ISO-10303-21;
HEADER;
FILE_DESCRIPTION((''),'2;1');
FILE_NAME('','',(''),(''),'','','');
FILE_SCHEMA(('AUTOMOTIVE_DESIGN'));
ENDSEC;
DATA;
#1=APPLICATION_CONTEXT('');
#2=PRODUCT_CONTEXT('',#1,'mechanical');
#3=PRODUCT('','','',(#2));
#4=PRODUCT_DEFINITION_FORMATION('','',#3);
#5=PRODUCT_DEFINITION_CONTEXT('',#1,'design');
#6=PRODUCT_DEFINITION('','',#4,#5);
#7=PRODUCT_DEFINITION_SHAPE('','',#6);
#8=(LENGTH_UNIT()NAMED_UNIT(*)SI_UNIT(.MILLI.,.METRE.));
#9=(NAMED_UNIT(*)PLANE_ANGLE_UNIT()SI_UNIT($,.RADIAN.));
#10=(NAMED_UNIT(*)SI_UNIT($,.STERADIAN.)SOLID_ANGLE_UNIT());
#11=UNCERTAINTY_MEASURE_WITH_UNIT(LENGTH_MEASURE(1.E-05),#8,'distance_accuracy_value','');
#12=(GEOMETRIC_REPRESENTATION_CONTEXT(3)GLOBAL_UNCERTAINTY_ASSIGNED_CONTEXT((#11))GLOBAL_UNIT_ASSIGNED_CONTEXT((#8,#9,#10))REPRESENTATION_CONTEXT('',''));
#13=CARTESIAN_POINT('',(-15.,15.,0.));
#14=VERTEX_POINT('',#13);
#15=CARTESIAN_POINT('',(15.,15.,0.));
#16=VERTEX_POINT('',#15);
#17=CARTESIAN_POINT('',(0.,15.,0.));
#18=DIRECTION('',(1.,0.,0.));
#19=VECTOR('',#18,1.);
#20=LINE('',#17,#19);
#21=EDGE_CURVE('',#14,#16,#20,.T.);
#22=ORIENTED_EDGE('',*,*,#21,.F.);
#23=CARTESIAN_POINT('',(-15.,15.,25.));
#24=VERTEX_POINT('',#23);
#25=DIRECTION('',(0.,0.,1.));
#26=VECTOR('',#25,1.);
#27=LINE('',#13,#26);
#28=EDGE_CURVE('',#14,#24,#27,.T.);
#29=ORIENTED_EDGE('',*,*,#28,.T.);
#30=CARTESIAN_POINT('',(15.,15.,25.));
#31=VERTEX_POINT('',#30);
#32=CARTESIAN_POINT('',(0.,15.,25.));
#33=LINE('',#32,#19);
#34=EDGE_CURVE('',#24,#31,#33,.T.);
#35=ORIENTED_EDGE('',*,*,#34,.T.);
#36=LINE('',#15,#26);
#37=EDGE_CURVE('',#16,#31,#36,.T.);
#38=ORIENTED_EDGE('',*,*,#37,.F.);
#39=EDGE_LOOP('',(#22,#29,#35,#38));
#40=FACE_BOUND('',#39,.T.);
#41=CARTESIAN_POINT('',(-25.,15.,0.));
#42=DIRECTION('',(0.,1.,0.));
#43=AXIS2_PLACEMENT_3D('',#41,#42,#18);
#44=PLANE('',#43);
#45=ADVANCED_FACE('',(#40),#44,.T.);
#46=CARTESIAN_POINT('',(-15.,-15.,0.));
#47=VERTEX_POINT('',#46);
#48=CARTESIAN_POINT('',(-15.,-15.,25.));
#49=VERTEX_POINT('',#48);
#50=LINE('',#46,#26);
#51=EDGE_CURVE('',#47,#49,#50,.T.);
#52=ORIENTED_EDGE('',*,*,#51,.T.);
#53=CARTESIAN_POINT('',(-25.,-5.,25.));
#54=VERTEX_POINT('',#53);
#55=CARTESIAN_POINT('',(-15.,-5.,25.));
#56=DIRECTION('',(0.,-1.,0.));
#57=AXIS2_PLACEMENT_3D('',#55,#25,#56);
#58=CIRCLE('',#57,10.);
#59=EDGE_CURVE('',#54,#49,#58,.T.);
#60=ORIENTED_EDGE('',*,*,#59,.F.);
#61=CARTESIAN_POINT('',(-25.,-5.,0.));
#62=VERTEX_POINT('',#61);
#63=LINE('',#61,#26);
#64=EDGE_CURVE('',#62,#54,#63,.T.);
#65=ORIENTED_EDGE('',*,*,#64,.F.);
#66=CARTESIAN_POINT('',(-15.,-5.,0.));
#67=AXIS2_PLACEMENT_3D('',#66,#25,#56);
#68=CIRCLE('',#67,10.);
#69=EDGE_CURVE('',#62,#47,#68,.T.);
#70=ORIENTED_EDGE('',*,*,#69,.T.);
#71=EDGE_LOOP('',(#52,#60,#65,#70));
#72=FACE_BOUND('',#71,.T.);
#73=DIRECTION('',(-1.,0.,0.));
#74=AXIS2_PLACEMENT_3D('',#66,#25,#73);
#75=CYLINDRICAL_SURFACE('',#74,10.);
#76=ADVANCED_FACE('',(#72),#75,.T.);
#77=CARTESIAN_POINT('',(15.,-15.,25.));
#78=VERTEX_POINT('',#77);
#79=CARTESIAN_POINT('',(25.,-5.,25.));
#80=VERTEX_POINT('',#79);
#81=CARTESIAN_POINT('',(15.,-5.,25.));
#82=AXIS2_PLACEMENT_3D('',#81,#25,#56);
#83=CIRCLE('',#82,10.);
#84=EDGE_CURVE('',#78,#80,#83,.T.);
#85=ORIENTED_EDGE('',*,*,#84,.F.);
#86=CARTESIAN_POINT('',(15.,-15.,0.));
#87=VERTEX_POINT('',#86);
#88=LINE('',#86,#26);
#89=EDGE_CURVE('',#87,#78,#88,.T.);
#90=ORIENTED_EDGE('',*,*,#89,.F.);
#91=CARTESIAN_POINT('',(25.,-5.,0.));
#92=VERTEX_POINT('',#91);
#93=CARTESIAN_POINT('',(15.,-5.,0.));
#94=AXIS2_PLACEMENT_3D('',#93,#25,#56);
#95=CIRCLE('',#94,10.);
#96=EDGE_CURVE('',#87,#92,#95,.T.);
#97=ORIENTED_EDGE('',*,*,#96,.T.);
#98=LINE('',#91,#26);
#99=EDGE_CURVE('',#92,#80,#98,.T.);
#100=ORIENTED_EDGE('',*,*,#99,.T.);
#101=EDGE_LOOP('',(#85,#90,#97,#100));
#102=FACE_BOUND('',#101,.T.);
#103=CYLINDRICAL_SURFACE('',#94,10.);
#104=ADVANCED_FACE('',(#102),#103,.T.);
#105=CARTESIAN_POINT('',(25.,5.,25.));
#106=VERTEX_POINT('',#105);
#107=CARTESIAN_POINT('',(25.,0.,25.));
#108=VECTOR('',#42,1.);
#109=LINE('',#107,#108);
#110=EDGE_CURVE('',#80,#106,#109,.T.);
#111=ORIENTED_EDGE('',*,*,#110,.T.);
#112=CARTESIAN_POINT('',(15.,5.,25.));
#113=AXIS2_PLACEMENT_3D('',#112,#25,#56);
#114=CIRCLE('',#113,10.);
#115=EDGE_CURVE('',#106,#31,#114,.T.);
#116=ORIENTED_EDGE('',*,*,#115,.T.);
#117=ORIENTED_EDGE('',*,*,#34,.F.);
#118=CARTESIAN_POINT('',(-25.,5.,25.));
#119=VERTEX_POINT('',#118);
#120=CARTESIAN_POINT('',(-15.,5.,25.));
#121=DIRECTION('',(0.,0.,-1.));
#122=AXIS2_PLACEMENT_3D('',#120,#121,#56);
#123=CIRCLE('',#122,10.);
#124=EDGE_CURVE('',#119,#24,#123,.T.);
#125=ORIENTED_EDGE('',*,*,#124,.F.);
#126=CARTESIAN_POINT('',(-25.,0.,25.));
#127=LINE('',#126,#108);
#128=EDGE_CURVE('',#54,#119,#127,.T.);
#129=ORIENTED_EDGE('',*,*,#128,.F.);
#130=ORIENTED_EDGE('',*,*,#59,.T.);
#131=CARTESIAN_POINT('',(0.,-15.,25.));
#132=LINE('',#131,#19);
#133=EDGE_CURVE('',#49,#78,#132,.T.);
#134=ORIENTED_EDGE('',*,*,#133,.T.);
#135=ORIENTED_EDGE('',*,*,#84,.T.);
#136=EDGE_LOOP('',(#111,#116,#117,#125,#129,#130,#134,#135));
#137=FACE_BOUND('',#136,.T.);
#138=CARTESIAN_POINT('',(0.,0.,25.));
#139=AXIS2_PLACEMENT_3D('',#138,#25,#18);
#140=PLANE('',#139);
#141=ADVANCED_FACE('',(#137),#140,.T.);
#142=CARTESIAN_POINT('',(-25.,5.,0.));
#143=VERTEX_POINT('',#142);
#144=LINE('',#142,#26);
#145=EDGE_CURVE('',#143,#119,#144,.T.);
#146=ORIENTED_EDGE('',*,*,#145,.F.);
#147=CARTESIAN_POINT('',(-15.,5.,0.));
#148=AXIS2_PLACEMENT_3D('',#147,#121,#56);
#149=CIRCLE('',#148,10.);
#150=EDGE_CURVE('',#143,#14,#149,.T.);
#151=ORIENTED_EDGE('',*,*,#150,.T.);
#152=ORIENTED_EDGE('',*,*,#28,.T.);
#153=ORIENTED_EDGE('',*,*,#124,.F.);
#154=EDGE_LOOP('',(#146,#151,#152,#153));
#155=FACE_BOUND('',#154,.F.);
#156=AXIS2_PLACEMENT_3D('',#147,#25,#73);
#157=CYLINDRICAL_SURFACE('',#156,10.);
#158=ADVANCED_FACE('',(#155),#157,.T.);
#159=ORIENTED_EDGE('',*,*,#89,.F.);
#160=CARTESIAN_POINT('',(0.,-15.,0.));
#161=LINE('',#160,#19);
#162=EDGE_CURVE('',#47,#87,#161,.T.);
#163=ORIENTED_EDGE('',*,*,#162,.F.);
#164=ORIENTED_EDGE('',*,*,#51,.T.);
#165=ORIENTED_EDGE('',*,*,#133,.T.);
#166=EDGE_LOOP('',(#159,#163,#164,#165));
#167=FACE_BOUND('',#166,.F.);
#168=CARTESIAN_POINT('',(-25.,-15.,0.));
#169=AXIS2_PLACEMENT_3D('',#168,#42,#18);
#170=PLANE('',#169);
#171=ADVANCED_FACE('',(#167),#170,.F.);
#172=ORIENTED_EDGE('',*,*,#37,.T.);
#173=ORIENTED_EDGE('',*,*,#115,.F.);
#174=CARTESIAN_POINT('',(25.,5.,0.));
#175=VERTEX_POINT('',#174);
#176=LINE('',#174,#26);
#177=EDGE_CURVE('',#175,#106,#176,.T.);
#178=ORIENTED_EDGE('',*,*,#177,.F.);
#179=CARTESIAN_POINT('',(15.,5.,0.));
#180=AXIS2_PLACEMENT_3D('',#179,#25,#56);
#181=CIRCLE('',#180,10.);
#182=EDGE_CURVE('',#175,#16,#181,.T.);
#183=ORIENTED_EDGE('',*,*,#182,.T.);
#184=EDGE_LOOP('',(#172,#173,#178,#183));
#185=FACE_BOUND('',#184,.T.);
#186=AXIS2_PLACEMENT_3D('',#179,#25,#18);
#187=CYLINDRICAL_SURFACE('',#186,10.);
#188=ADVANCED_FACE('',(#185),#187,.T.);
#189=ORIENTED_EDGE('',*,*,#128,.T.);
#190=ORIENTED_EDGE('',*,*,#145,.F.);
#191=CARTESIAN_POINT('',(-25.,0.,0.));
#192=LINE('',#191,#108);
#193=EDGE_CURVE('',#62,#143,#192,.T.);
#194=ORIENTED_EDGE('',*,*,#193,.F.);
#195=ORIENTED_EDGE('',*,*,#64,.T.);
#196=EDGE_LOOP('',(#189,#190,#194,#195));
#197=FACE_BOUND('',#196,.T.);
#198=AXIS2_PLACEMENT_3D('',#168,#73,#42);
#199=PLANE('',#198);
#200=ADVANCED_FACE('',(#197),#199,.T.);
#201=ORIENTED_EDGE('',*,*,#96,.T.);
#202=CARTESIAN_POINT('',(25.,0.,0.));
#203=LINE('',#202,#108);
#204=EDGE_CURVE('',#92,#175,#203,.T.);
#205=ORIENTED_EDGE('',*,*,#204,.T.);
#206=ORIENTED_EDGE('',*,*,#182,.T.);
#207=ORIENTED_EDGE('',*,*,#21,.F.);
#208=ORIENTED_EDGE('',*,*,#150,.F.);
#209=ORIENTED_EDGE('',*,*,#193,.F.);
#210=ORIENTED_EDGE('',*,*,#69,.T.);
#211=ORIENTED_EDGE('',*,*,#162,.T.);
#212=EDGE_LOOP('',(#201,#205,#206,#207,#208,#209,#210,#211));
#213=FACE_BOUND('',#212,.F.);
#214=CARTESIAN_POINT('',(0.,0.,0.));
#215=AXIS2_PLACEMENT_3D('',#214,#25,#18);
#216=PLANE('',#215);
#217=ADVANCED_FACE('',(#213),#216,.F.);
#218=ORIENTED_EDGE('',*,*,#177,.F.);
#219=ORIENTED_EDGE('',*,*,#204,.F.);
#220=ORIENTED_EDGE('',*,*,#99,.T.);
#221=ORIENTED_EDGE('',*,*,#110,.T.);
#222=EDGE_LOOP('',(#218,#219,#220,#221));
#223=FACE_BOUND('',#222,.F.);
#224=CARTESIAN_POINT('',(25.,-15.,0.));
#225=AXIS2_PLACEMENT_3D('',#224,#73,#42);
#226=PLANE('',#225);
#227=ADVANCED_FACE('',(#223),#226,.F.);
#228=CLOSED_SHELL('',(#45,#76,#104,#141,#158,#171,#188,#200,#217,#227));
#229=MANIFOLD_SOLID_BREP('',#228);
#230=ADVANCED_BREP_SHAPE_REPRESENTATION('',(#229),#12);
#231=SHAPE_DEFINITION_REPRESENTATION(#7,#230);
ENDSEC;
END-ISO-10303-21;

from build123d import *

# Parameters (mm, degrees)
F0_W     = 50
F0_H     = 30
F1_DEPTH = 25
F2_R     = 10


# Not quite as in the source:
# - a feature of the source that left no trace in its solid (it failed there, or was rolled back) is left out


with BuildPart() as f1:
    # F0 (on Top) → F1 (new body)
    with BuildSketch(Plane.XY):
        Rectangle(F0_W, F0_H)
    extrude(amount=F1_DEPTH)

    # F2
    f2_edges = [f1.edges().sort_by_distance(p)[0] for p in [
        (25, -15, 12.5),
        (-25, -15, 12.5),
        (25, 15, 12.5),
        (-25, 15, 12.5),
    ]]
    fillet(f2_edges, radius=F2_R)


solid = f1.part
